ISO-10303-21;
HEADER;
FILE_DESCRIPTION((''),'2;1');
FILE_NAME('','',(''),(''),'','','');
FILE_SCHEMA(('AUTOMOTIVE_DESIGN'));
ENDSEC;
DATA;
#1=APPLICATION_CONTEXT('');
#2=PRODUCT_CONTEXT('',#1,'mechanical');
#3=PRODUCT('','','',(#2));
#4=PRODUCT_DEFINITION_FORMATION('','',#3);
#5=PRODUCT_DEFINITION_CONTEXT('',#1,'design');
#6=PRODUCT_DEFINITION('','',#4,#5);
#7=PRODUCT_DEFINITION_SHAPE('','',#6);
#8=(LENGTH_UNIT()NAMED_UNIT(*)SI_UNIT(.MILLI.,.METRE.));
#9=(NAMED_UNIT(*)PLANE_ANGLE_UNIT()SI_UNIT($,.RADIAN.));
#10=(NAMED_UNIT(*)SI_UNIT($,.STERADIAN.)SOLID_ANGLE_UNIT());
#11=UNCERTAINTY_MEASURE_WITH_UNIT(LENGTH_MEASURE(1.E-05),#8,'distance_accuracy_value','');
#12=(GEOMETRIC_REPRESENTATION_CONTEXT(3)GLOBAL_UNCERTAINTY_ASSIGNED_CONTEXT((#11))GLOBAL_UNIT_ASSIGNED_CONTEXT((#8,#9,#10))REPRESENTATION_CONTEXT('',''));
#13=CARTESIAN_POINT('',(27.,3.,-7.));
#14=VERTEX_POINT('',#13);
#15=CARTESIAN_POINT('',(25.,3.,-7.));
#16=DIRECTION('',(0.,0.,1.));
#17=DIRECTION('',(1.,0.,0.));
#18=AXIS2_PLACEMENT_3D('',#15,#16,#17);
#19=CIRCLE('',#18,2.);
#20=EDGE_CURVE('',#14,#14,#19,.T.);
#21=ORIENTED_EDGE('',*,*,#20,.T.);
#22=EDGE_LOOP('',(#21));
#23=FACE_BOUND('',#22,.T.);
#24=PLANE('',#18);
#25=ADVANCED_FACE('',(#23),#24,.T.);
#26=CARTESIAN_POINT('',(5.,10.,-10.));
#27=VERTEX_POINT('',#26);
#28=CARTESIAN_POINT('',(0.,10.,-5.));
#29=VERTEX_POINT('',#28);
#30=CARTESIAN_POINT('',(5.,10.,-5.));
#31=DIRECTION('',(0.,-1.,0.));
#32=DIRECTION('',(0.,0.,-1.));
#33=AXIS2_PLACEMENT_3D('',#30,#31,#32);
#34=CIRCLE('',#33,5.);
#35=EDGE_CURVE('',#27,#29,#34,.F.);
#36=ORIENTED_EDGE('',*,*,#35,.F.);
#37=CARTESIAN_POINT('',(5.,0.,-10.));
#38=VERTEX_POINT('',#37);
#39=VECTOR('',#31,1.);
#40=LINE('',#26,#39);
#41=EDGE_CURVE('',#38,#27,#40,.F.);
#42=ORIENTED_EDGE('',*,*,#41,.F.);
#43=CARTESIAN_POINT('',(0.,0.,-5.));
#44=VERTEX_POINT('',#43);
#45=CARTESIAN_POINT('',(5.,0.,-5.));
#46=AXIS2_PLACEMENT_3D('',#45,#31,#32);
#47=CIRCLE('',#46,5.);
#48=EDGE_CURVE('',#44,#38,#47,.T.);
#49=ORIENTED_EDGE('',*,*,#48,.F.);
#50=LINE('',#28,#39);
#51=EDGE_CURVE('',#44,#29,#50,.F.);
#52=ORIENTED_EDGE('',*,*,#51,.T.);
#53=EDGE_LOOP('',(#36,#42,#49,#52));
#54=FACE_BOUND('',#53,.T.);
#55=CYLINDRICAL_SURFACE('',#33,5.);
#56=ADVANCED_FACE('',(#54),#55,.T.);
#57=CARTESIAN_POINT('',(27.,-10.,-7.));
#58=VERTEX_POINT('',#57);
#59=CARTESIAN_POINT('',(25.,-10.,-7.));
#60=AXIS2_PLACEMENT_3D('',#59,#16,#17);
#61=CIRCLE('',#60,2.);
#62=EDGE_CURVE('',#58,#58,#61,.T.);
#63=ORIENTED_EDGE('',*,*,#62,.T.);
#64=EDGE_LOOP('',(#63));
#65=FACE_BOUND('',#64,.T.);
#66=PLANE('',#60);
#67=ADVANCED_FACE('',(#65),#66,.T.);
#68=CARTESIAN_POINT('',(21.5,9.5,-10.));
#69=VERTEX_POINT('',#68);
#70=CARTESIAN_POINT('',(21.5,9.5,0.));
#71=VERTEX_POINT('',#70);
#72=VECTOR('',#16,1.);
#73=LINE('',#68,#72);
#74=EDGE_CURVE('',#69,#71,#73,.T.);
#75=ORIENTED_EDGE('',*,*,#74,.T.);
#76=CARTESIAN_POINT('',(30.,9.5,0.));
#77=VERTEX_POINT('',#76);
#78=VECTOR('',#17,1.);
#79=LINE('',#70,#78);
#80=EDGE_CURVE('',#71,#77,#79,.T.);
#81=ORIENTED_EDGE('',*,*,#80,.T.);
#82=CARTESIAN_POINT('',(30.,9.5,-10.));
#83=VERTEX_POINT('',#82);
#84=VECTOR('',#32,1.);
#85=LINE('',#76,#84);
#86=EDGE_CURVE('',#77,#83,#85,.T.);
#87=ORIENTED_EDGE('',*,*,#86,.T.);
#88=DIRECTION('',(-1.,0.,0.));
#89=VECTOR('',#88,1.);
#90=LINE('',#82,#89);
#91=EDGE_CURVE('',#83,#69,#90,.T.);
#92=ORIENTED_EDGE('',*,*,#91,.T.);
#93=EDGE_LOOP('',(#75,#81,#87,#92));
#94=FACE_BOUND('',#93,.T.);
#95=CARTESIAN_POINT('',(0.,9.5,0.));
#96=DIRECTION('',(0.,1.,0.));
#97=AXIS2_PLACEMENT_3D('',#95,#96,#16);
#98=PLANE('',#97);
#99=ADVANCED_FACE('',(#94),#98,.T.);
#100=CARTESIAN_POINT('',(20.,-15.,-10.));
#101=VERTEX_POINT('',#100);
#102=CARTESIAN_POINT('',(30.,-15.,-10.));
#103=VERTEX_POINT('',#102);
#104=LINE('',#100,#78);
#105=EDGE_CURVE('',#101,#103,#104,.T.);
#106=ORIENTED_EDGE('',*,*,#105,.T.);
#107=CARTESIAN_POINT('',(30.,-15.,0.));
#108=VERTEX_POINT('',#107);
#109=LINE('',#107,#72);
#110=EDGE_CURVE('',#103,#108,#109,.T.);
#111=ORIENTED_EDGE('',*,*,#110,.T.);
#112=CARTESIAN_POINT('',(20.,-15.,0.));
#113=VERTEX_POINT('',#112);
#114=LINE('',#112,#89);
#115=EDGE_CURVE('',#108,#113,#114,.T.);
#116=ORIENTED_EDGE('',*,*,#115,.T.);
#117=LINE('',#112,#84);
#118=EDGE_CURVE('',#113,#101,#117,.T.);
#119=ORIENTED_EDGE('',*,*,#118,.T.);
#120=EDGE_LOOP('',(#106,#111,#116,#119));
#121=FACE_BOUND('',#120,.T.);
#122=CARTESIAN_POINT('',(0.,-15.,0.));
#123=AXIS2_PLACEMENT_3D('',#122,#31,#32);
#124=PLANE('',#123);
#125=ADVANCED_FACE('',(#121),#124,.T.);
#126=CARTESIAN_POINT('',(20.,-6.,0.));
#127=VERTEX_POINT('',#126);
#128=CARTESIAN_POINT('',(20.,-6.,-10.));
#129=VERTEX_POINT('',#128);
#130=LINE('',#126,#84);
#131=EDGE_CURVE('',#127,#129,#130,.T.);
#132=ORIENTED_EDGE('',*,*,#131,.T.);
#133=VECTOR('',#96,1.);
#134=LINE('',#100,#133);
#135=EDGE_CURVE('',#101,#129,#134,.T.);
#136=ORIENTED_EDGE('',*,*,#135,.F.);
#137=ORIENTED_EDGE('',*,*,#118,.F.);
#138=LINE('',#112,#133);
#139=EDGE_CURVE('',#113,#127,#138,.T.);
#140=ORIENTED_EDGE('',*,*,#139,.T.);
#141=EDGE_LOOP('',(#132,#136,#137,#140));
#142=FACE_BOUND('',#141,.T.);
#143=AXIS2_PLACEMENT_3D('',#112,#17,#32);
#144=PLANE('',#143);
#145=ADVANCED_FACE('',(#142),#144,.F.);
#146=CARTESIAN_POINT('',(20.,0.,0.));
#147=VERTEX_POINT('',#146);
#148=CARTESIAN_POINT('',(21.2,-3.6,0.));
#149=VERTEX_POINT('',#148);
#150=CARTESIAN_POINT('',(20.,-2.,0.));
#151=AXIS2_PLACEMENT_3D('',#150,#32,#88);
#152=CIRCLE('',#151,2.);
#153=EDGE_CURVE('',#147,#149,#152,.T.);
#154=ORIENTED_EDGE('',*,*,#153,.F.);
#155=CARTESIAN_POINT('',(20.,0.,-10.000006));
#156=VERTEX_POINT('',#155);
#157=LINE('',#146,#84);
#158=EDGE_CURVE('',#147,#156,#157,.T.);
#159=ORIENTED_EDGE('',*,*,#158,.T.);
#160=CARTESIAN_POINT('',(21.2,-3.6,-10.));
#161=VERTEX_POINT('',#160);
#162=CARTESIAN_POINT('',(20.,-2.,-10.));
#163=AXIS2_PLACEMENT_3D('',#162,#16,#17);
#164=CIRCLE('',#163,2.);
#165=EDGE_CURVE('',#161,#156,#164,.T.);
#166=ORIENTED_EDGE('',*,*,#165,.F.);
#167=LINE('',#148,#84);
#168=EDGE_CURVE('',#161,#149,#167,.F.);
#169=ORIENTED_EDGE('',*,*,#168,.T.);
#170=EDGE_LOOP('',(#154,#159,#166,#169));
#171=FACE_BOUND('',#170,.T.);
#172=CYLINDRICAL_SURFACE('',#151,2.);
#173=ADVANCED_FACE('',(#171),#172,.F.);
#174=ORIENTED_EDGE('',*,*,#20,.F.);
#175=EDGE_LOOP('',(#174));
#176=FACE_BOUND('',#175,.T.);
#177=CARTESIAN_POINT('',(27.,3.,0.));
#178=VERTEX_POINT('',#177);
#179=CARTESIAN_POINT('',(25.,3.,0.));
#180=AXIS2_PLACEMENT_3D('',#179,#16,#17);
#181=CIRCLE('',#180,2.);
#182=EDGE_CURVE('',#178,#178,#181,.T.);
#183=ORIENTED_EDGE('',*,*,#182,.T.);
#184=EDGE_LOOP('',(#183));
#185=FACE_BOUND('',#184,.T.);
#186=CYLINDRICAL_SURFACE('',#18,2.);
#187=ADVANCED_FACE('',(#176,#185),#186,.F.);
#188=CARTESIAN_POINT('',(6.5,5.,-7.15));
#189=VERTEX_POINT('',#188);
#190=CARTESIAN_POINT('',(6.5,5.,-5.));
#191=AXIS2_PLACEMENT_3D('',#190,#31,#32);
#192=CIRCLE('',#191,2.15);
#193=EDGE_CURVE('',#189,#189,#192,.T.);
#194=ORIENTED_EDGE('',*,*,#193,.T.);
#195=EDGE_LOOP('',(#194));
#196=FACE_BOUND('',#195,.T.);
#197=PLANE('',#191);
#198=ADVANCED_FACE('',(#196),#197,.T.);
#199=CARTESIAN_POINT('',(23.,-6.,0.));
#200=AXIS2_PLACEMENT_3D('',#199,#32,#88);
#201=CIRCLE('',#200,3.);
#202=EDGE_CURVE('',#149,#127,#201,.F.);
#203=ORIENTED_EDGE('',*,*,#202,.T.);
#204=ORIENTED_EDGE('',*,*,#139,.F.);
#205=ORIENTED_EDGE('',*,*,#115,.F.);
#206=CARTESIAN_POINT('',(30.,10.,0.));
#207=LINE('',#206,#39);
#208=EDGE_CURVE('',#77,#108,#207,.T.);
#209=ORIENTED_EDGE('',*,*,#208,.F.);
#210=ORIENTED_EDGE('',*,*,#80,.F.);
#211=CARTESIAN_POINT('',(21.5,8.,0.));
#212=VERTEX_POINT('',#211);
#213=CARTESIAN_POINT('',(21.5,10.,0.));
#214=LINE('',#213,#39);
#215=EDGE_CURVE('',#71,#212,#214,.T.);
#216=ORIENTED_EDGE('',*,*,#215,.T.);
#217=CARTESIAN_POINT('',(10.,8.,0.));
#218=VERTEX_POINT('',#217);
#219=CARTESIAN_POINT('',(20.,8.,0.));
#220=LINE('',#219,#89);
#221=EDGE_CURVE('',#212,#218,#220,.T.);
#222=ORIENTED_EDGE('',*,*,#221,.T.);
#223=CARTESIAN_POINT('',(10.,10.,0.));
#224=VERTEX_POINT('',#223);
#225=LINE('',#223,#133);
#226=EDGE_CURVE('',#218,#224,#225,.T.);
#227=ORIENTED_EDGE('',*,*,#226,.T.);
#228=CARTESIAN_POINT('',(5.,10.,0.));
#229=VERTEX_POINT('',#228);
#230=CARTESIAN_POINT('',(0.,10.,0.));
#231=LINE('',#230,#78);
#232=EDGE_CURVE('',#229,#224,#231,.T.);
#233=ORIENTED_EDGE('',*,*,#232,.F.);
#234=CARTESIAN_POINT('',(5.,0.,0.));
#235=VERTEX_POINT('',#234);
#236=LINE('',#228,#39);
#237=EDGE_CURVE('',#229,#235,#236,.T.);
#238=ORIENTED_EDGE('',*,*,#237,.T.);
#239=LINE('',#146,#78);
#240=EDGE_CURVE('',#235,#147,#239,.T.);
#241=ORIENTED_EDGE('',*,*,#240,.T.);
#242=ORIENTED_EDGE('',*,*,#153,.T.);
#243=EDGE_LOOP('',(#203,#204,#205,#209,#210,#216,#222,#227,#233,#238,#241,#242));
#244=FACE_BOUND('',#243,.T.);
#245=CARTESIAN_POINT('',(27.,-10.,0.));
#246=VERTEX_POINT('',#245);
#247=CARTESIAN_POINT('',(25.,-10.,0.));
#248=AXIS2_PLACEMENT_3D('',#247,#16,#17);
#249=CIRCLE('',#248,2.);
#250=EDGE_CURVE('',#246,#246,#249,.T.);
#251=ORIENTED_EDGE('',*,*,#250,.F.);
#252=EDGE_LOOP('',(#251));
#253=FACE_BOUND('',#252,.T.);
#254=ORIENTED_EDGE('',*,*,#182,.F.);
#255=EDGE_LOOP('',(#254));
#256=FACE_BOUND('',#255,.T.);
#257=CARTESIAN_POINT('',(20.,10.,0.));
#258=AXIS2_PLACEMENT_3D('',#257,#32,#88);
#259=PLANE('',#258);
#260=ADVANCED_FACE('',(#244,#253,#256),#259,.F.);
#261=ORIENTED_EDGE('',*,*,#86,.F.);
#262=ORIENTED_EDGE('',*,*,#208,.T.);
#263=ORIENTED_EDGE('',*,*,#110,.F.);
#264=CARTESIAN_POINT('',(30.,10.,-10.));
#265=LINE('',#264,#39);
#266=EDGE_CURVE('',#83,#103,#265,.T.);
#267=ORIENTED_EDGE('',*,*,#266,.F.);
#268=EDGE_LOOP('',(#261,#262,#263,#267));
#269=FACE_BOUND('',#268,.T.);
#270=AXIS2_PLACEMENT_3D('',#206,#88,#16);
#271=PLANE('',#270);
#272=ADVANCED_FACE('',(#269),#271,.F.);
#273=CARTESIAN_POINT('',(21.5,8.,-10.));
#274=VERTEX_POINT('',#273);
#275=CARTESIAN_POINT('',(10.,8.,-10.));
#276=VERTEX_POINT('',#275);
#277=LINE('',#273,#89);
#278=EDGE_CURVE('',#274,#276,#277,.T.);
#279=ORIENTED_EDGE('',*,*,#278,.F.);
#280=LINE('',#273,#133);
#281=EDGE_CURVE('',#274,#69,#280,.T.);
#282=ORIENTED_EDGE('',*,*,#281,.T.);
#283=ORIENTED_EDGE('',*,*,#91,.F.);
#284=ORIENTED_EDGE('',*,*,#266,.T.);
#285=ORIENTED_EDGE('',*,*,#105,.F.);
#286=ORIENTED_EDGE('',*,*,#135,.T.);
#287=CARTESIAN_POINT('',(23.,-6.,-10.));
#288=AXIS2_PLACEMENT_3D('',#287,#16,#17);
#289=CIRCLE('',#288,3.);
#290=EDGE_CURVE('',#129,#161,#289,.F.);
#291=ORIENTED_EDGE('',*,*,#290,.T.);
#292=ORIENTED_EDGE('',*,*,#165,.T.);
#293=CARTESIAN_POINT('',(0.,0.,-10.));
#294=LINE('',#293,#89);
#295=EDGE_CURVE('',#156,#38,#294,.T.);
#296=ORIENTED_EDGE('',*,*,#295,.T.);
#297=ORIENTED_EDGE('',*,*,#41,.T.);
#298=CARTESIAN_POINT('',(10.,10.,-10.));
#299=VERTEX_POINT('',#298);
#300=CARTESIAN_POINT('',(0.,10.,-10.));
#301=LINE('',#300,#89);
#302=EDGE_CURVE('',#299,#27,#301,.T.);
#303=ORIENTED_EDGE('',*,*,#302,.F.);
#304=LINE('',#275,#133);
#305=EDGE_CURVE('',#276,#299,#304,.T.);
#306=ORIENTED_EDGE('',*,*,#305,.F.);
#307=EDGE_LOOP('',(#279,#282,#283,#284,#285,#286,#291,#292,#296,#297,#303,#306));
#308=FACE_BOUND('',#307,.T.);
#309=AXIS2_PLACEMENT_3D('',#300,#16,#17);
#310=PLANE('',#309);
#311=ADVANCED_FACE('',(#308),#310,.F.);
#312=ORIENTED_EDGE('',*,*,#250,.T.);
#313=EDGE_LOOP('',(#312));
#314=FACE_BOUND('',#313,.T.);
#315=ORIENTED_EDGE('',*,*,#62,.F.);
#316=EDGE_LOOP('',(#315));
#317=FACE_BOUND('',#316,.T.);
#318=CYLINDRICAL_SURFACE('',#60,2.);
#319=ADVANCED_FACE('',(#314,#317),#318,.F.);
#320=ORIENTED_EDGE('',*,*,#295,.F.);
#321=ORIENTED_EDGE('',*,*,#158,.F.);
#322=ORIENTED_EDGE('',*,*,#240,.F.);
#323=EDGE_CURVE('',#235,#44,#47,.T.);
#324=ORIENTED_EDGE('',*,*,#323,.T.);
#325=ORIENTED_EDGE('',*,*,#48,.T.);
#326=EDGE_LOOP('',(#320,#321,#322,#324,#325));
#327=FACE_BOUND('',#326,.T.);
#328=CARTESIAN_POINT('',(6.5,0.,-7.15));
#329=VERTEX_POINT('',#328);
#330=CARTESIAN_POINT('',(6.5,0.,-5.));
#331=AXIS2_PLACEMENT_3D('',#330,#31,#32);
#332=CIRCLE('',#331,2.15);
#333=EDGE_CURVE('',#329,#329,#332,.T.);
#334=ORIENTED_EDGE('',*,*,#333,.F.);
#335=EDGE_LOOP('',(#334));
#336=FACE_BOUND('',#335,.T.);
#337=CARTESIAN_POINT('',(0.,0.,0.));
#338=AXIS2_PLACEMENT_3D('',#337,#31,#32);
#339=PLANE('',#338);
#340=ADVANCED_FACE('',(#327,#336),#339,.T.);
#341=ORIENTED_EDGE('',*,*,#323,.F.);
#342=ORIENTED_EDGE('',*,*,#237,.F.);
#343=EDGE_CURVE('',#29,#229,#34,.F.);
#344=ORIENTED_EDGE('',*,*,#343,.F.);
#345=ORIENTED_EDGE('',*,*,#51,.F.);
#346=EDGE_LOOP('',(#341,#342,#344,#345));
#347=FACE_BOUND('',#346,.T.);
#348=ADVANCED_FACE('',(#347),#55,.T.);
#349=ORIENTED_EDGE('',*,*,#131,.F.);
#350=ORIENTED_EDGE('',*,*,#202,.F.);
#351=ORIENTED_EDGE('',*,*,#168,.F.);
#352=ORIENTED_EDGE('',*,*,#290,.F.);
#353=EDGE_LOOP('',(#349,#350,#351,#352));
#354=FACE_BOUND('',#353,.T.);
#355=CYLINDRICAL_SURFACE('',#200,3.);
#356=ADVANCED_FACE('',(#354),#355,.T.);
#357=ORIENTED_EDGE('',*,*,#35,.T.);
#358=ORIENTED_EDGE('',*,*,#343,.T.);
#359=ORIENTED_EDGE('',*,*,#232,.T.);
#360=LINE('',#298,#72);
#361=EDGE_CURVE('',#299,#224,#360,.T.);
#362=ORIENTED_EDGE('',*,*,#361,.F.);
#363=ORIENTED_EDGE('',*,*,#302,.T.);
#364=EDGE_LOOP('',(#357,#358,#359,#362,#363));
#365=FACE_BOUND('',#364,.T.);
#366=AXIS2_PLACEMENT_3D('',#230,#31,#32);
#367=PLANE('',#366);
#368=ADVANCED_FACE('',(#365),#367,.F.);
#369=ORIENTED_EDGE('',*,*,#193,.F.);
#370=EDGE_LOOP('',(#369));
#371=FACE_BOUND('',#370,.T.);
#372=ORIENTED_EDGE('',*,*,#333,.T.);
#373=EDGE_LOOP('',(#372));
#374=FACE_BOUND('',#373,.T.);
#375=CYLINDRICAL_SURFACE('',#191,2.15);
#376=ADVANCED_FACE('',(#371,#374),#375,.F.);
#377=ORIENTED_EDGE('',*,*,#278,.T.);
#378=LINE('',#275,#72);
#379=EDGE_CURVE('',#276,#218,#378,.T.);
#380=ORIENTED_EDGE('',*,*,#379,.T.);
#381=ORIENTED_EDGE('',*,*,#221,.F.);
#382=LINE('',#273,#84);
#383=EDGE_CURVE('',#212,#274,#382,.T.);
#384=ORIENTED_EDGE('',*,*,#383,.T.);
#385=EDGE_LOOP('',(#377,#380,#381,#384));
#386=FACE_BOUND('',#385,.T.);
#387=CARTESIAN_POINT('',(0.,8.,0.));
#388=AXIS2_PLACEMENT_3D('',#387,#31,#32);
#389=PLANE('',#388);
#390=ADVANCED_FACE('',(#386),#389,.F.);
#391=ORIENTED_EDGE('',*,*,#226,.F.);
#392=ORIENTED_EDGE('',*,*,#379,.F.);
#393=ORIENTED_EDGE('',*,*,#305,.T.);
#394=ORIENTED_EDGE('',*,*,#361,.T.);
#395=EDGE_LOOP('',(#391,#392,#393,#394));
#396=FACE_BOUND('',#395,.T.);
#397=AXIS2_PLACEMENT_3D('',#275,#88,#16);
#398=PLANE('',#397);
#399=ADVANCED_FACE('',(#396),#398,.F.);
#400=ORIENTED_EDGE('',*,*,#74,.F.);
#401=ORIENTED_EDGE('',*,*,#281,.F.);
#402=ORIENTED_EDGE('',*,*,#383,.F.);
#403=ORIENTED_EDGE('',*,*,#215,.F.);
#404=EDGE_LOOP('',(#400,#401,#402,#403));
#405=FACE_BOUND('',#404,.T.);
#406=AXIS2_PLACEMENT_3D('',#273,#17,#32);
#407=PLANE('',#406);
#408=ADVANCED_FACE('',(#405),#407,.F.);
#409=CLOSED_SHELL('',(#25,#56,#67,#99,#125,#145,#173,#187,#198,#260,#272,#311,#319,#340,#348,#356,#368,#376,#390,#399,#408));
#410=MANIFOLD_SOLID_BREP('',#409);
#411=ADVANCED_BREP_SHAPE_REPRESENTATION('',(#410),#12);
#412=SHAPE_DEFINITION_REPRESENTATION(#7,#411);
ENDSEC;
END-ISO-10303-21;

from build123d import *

# Parameters (mm, degrees)
BOSS_EXTRUDE1_DEPTH     = 10
SKETCH2_W               = 11.5
SKETCH2_H               = 17.246462599
CUT_EXTRUDE1_DEPTH      = 2
FILLET1_R               = 5
SKETCH4_R               = 2.15
CUT_EXTRUDE4_DEPTH      = 5
SKETCH6_W               = 10
SKETCH6_H               = 10
BOSS_EXTRUDE2_DEPTH     = 15
SKETCH5_R               = 2
CUT_EXTRUDE5_DEPTH      = 7
SKETCH7_W               = 8.5
SKETCH7_H               = 10
CUT_EXTRUDE6_DEPTH      = 0.5
CUT_EXTRUDE7_DEPTH      = 36
CUT_EXTRUDE7_DEPTH_BACK = 36
SKETCH8_R               = 2
FILLET2_R               = 3


with BuildPart() as part:
    # Sketch1 → Boss-Extrude1 (new body)
    with BuildSketch(Plane(origin=(0, 0, 0), x_dir=(1, 0, 0), z_dir=(0, 1, 0))):
        Polygon((0, 0), (20, 0), (30, 0), (30, 10), (0, 10), align=None)
    extrude(amount=BOSS_EXTRUDE1_DEPTH)

    # Sketch2 → Cut-Extrude1 (cut)
    with BuildSketch(Plane(origin=(0, 10, 0), x_dir=(1, 0, 0), z_dir=(0, 1, 0))):
        with Locations((15.75, 1.3767687)):
            Rectangle(SKETCH2_W, SKETCH2_H)
    extrude(amount=-CUT_EXTRUDE1_DEPTH, mode=Mode.SUBTRACT)

    # Fillet1
    fillet1_edges = [part.edges().sort_by_distance(p)[0] for p in [
        (0, 5, -10),
        (0, 5, 0),
    ]]
    fillet(fillet1_edges, radius=FILLET1_R - 0.0001)  # a hair under: the kernel refuses the full size

    # Sketch4 → Cut-Extrude4 (cut)
    with BuildSketch(Plane.XZ):
        with Locations(Location((6.5, -5, 0), (0, 0, 270))):
            Circle(SKETCH4_R)
    extrude(amount=-CUT_EXTRUDE4_DEPTH, mode=Mode.SUBTRACT)

    # Sketch6 → Boss-Extrude2 (add)
    with BuildSketch(Plane.XZ):
        with Locations((25, -5)):
            Rectangle(SKETCH6_W, SKETCH6_H)
    extrude(amount=BOSS_EXTRUDE2_DEPTH)

    # Sketch5 → Cut-Extrude5 (cut)
    with BuildSketch(Plane.XY):
        with Locations((25, 3)):
            Circle(SKETCH5_R)
        with Locations((25, -10)):
            Circle(SKETCH5_R)
    extrude(amount=-CUT_EXTRUDE5_DEPTH, mode=Mode.SUBTRACT)

    # Sketch7 → Cut-Extrude6 (cut)
    with BuildSketch(Plane(origin=(0, 10, 0), x_dir=(1, 0, 0), z_dir=(0, 1, 0))):
        with Locations((25.75, 5)):
            Rectangle(SKETCH7_W, SKETCH7_H)
    extrude(amount=-CUT_EXTRUDE6_DEPTH, mode=Mode.SUBTRACT)

    # Sketch8 → Cut-Extrude7 (cut, two sides: drawn at the far end of the back side and taken through both)
    with BuildSketch(Plane(origin=(0, 0, -10), x_dir=(-1, 0, 0), z_dir=(0, 0, -1)).offset(-CUT_EXTRUDE7_DEPTH_BACK)):
        with Locations((-20, -2)):
            Circle(SKETCH8_R)
    extrude(amount=CUT_EXTRUDE7_DEPTH + CUT_EXTRUDE7_DEPTH_BACK, mode=Mode.SUBTRACT)

    # Fillet2
    fillet2_edges = [part.edges().sort_by_distance(p)[0] for p in [
        (20, -4, -5),
    ]]
    fillet(fillet2_edges, radius=FILLET2_R)


solid = part.part
